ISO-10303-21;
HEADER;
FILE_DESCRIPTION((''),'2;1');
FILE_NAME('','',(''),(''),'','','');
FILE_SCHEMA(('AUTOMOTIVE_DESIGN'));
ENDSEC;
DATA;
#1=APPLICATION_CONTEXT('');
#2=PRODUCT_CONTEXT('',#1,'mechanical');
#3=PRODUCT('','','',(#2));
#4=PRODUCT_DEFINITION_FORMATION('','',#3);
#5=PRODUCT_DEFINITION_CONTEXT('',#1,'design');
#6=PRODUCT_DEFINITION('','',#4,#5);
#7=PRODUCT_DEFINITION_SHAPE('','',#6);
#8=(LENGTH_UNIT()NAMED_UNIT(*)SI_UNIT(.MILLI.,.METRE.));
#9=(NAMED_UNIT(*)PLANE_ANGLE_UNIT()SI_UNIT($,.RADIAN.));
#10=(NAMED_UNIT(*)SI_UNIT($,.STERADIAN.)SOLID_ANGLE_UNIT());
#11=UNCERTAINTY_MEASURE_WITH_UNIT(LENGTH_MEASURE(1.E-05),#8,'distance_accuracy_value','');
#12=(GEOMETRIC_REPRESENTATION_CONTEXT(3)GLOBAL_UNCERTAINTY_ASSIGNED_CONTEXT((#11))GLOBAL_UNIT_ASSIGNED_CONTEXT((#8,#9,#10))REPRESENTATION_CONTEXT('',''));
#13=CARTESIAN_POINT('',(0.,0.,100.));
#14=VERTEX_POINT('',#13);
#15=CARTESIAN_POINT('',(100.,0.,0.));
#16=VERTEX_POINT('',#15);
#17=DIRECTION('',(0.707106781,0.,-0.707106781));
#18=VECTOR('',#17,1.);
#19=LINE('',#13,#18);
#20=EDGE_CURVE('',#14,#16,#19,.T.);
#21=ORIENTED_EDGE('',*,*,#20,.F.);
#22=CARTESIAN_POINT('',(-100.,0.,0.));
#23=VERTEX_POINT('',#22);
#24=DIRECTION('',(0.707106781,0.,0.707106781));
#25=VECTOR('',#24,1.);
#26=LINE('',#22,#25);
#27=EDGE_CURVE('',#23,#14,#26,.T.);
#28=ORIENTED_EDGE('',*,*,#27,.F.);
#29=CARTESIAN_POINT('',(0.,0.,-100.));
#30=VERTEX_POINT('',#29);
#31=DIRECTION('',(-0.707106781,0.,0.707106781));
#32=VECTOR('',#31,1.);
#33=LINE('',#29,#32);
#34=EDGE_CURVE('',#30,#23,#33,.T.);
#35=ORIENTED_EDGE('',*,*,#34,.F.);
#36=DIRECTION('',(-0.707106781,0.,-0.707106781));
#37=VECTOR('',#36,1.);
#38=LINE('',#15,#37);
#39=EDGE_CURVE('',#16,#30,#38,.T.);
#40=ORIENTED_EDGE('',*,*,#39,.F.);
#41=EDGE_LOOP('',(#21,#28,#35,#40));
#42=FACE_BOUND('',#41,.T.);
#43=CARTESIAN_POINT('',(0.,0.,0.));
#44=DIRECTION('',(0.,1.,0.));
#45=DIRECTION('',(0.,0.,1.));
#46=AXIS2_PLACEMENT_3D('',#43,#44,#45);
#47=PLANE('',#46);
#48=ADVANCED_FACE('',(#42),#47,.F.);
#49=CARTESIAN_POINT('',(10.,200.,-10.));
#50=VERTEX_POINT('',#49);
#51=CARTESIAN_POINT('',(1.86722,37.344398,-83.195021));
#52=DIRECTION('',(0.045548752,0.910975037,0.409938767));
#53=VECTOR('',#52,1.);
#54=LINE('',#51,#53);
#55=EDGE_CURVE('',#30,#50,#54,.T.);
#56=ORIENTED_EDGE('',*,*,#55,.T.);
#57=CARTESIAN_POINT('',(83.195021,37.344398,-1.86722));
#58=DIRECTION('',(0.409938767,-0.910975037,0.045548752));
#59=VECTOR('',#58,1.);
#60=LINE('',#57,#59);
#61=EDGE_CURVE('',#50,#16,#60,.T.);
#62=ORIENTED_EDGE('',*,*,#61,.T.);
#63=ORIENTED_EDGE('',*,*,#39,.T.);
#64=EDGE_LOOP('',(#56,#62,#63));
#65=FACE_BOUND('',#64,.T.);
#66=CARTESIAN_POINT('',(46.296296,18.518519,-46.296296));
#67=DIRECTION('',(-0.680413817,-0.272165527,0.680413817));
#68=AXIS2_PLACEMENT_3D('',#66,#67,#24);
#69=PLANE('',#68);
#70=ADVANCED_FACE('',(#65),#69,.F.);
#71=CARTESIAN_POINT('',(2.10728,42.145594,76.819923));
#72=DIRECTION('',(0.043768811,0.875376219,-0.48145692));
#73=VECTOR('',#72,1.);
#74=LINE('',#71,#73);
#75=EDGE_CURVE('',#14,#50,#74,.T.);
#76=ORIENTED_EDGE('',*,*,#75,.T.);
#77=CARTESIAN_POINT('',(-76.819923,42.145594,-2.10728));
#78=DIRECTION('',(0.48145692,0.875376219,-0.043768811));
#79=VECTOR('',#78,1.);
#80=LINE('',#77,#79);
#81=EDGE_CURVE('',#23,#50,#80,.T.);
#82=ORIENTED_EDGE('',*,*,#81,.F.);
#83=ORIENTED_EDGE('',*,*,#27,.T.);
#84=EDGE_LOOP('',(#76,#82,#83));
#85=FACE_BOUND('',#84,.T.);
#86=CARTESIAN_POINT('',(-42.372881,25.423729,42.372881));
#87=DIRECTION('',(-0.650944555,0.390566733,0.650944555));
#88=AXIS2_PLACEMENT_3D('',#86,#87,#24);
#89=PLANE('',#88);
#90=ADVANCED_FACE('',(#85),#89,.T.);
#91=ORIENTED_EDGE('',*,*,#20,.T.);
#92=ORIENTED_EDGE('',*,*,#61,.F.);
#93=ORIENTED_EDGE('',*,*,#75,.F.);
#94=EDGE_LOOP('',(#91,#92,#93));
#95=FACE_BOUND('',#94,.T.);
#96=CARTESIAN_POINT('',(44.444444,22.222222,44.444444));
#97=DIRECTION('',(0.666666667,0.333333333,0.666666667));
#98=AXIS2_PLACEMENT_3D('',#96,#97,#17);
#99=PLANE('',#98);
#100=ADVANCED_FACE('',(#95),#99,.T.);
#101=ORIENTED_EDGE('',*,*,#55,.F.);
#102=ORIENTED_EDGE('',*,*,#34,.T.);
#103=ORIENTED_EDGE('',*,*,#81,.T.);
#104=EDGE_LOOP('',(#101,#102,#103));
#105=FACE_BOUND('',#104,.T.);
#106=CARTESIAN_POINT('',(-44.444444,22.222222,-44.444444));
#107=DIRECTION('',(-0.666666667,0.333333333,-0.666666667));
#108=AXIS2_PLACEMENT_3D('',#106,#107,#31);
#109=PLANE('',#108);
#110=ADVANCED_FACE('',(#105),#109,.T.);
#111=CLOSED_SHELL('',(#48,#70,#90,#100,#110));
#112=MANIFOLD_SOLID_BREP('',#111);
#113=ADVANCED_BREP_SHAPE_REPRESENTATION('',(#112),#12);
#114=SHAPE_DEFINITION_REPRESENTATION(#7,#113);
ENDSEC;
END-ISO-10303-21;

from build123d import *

# Parameters (mm, degrees)
EXTRUDE_1_DEPTH = 200


# Read off the part's stored shape, not the designer's step: 本體-刪除/保留 2, 本體-刪除/保留 3, 本體-刪除/保留 4
with BuildPart() as part:
    # 草圖1 → 填料-伸長1 (new body)
    with BuildSketch(Plane(origin=(0, 0, 0), x_dir=(1, 0, 0), z_dir=(0, 1, 0))):
        Polygon((0, 100), (-100, 0), (0, -100), (100, 0), align=None)
    extrude(amount=EXTRUDE_1_DEPTH)


with BuildPart() as body_2:
    # Split Bodies 2: the piece on the far side of the plane
    add(part.part)
    split(bisect_by=Plane(origin=(-44.444444444, 22.222222222, -44.444444444), x_dir=(0.7071067811865474, 0, -0.7071067811865479), z_dir=(-0.666666666666667, 0.33333333333333337, -0.6666666666666665)), keep=Keep.BOTTOM)


with BuildPart() as part_1:
    add(part.part)

    # Split Bodies 2
    split(bisect_by=Plane(origin=(-44.444444444, 22.222222222, -44.444444444), x_dir=(0.7071067811865474, 0, -0.7071067811865479), z_dir=(-0.666666666666667, 0.33333333333333337, -0.6666666666666665)), keep=Keep.TOP)


with BuildPart() as body_2_2:
    # Split Bodies 3: the piece on the far side of the plane
    add(body_2.part)
    split(bisect_by=Plane(origin=(-42.372881356, 25.423728814, 42.372881356), x_dir=(0.7071067811865476, 0, 0.7071067811865476), z_dir=(-0.6509445549041194, 0.39056673294247174, 0.6509445549041194)), keep=Keep.BOTTOM)


with BuildPart() as body_2_1:
    add(body_2.part)

    # Split Bodies 3
    split(bisect_by=Plane(origin=(-42.372881356, 25.423728814, 42.372881356), x_dir=(0.7071067811865476, 0, 0.7071067811865476), z_dir=(-0.6509445549041194, 0.39056673294247174, 0.6509445549041194)), keep=Keep.TOP)


with BuildPart() as body_2_3:
    # Split Bodies 4: the piece on the far side of the plane
    add(body_2_2.part)
    split(bisect_by=Plane(origin=(44.444444444, 22.222222222, 44.444444444), x_dir=(0.7071067811865479, 0, -0.7071067811865474), z_dir=(0.6666666666666665, 0.33333333333333337, 0.666666666666667)), keep=Keep.BOTTOM)


with BuildPart() as body_2_2_1:
    add(body_2_2.part)

    # Split Bodies 4
    split(bisect_by=Plane(origin=(44.444444444, 22.222222222, 44.444444444), x_dir=(0.7071067811865479, 0, -0.7071067811865474), z_dir=(0.6666666666666665, 0.33333333333333337, 0.666666666666667)), keep=Keep.TOP)


with BuildPart() as body_2_4:
    # Split Bodies 5: the piece on the far side of the plane
    add(body_2_3.part)
    split(bisect_by=Plane(origin=(46.296296296, 18.518518519, -46.296296296), x_dir=(-0.7071067811865475, 0, -0.7071067811865477), z_dir=(-0.6804138174397718, -0.2721655269759089, 0.6804138174397716)), keep=Keep.BOTTOM)


with BuildPart() as body_2_3_1:
    add(body_2_3.part)

    # Split Bodies 5
    split(bisect_by=Plane(origin=(46.296296296, 18.518518519, -46.296296296), x_dir=(-0.7071067811865475, 0, -0.7071067811865477), z_dir=(-0.6804138174397718, -0.2721655269759089, 0.6804138174397716)), keep=Keep.TOP)


solid = body_2_3_1.part
